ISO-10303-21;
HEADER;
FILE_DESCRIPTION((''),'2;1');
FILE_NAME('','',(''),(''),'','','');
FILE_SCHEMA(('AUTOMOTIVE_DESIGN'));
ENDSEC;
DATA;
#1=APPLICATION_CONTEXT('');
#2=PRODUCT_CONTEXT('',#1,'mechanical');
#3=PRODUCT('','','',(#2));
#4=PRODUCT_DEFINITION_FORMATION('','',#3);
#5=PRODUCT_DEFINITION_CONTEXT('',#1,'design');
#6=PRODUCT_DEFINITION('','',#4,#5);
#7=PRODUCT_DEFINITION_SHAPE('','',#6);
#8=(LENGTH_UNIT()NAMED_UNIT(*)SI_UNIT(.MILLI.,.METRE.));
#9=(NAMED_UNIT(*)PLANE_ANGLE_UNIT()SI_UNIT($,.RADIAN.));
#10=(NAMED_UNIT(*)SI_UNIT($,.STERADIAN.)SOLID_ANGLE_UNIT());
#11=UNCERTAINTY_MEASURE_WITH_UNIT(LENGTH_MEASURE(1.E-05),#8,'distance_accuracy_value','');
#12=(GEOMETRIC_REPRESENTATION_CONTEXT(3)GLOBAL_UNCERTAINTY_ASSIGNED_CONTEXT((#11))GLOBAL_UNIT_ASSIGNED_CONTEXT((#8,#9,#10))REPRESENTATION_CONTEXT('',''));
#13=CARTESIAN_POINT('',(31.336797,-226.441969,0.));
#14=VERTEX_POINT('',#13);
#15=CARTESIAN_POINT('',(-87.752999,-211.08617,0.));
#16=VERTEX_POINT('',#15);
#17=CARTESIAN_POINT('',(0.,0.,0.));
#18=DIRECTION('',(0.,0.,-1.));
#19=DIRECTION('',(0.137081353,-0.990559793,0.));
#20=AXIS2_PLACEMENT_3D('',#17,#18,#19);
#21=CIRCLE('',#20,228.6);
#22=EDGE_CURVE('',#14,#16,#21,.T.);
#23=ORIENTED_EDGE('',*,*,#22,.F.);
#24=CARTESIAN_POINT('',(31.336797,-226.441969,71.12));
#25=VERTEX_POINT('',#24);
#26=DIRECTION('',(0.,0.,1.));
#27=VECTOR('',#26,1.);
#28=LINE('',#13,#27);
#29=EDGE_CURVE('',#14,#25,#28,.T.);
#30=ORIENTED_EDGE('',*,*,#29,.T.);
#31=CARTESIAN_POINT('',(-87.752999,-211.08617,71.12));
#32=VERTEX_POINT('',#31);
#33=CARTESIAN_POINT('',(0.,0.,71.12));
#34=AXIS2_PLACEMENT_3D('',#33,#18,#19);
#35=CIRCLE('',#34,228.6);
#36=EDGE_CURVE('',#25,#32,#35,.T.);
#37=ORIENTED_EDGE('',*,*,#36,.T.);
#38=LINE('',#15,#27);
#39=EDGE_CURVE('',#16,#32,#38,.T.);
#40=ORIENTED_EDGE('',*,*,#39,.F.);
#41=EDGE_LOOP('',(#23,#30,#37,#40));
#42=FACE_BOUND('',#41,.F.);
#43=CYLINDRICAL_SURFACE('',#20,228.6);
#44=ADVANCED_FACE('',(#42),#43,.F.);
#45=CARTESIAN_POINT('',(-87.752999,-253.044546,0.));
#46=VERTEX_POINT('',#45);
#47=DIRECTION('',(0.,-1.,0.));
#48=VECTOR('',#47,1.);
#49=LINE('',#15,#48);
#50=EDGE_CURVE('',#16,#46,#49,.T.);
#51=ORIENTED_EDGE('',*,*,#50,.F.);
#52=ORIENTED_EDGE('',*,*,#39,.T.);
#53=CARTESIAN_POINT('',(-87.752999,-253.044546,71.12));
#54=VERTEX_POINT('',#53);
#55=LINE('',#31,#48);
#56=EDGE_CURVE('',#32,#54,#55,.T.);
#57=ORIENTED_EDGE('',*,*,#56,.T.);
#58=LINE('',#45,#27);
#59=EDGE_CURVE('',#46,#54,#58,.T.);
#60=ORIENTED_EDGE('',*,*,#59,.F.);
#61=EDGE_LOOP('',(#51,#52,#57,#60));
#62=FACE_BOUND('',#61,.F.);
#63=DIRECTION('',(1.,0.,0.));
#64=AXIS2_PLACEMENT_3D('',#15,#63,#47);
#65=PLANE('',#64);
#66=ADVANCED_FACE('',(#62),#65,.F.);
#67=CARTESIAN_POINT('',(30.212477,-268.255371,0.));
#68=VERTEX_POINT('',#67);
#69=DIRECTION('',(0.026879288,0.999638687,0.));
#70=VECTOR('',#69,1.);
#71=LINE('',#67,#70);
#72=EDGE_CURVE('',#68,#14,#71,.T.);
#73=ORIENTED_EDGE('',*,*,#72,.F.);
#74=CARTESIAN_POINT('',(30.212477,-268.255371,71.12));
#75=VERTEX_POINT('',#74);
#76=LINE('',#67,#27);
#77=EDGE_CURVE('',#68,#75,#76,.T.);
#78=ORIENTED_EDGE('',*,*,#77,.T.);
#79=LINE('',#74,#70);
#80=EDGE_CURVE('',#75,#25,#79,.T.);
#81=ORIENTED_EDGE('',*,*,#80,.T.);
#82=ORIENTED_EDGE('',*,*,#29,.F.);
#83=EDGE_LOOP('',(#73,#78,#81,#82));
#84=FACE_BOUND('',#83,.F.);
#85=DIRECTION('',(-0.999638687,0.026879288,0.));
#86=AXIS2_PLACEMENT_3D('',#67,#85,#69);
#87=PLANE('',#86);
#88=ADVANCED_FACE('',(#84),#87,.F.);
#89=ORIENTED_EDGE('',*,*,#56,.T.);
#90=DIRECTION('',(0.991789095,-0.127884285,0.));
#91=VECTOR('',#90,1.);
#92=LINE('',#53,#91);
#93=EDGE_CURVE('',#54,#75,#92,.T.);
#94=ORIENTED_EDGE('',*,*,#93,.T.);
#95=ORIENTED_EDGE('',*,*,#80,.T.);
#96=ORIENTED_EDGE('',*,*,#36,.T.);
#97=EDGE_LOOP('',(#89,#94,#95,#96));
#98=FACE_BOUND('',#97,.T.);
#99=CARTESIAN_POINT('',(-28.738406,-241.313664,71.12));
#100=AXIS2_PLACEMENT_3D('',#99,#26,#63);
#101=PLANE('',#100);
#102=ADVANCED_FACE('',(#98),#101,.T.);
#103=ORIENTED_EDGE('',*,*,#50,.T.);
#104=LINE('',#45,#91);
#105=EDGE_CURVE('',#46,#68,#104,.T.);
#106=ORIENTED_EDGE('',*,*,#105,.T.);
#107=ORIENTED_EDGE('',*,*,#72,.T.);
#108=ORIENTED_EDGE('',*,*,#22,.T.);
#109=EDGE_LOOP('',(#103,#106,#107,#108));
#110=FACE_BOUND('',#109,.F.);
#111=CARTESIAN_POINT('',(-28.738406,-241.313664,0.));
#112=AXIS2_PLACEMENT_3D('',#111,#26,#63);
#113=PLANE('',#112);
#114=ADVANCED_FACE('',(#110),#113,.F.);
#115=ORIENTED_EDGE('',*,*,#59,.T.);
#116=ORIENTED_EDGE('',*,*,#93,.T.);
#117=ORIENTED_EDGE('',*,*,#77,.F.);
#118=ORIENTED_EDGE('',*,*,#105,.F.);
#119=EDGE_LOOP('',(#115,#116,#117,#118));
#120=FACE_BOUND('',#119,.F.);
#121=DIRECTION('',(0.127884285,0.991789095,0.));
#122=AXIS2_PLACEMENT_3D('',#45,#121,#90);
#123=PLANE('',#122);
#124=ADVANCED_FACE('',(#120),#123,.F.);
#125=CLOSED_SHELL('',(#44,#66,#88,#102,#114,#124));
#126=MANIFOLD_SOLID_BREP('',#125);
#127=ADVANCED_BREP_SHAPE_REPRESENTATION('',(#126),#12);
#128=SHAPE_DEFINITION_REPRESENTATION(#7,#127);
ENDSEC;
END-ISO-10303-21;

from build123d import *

# Parameters (mm, degrees)
F2_DEPTH = 71.12


# Not quite as in the source:
# - the program builds the solid bodies; features that only make, move or delete a surface that nothing else refers to are left out


with BuildPart() as f2:
    # F0 (on Top) → F2 (new body)
    with BuildSketch(Plane.XY):
        with BuildLine():
            ThreePointArc((31.3367973024, -226.441968581), (-29.2343475788, -226.7229871928), (-87.7529985977, -211.0861701702))
            Line((-87.7529985977, -211.0861701702), (-87.7529985977, -253.0445456505))
            Line((-87.7529985977, -253.0445456505), (30.2124765983, -268.2553707498))
            Line((30.2124765983, -268.2553707498), (31.3367973024, -226.441968581))
        make_face()
    extrude(amount=F2_DEPTH)


solid = f2.part
